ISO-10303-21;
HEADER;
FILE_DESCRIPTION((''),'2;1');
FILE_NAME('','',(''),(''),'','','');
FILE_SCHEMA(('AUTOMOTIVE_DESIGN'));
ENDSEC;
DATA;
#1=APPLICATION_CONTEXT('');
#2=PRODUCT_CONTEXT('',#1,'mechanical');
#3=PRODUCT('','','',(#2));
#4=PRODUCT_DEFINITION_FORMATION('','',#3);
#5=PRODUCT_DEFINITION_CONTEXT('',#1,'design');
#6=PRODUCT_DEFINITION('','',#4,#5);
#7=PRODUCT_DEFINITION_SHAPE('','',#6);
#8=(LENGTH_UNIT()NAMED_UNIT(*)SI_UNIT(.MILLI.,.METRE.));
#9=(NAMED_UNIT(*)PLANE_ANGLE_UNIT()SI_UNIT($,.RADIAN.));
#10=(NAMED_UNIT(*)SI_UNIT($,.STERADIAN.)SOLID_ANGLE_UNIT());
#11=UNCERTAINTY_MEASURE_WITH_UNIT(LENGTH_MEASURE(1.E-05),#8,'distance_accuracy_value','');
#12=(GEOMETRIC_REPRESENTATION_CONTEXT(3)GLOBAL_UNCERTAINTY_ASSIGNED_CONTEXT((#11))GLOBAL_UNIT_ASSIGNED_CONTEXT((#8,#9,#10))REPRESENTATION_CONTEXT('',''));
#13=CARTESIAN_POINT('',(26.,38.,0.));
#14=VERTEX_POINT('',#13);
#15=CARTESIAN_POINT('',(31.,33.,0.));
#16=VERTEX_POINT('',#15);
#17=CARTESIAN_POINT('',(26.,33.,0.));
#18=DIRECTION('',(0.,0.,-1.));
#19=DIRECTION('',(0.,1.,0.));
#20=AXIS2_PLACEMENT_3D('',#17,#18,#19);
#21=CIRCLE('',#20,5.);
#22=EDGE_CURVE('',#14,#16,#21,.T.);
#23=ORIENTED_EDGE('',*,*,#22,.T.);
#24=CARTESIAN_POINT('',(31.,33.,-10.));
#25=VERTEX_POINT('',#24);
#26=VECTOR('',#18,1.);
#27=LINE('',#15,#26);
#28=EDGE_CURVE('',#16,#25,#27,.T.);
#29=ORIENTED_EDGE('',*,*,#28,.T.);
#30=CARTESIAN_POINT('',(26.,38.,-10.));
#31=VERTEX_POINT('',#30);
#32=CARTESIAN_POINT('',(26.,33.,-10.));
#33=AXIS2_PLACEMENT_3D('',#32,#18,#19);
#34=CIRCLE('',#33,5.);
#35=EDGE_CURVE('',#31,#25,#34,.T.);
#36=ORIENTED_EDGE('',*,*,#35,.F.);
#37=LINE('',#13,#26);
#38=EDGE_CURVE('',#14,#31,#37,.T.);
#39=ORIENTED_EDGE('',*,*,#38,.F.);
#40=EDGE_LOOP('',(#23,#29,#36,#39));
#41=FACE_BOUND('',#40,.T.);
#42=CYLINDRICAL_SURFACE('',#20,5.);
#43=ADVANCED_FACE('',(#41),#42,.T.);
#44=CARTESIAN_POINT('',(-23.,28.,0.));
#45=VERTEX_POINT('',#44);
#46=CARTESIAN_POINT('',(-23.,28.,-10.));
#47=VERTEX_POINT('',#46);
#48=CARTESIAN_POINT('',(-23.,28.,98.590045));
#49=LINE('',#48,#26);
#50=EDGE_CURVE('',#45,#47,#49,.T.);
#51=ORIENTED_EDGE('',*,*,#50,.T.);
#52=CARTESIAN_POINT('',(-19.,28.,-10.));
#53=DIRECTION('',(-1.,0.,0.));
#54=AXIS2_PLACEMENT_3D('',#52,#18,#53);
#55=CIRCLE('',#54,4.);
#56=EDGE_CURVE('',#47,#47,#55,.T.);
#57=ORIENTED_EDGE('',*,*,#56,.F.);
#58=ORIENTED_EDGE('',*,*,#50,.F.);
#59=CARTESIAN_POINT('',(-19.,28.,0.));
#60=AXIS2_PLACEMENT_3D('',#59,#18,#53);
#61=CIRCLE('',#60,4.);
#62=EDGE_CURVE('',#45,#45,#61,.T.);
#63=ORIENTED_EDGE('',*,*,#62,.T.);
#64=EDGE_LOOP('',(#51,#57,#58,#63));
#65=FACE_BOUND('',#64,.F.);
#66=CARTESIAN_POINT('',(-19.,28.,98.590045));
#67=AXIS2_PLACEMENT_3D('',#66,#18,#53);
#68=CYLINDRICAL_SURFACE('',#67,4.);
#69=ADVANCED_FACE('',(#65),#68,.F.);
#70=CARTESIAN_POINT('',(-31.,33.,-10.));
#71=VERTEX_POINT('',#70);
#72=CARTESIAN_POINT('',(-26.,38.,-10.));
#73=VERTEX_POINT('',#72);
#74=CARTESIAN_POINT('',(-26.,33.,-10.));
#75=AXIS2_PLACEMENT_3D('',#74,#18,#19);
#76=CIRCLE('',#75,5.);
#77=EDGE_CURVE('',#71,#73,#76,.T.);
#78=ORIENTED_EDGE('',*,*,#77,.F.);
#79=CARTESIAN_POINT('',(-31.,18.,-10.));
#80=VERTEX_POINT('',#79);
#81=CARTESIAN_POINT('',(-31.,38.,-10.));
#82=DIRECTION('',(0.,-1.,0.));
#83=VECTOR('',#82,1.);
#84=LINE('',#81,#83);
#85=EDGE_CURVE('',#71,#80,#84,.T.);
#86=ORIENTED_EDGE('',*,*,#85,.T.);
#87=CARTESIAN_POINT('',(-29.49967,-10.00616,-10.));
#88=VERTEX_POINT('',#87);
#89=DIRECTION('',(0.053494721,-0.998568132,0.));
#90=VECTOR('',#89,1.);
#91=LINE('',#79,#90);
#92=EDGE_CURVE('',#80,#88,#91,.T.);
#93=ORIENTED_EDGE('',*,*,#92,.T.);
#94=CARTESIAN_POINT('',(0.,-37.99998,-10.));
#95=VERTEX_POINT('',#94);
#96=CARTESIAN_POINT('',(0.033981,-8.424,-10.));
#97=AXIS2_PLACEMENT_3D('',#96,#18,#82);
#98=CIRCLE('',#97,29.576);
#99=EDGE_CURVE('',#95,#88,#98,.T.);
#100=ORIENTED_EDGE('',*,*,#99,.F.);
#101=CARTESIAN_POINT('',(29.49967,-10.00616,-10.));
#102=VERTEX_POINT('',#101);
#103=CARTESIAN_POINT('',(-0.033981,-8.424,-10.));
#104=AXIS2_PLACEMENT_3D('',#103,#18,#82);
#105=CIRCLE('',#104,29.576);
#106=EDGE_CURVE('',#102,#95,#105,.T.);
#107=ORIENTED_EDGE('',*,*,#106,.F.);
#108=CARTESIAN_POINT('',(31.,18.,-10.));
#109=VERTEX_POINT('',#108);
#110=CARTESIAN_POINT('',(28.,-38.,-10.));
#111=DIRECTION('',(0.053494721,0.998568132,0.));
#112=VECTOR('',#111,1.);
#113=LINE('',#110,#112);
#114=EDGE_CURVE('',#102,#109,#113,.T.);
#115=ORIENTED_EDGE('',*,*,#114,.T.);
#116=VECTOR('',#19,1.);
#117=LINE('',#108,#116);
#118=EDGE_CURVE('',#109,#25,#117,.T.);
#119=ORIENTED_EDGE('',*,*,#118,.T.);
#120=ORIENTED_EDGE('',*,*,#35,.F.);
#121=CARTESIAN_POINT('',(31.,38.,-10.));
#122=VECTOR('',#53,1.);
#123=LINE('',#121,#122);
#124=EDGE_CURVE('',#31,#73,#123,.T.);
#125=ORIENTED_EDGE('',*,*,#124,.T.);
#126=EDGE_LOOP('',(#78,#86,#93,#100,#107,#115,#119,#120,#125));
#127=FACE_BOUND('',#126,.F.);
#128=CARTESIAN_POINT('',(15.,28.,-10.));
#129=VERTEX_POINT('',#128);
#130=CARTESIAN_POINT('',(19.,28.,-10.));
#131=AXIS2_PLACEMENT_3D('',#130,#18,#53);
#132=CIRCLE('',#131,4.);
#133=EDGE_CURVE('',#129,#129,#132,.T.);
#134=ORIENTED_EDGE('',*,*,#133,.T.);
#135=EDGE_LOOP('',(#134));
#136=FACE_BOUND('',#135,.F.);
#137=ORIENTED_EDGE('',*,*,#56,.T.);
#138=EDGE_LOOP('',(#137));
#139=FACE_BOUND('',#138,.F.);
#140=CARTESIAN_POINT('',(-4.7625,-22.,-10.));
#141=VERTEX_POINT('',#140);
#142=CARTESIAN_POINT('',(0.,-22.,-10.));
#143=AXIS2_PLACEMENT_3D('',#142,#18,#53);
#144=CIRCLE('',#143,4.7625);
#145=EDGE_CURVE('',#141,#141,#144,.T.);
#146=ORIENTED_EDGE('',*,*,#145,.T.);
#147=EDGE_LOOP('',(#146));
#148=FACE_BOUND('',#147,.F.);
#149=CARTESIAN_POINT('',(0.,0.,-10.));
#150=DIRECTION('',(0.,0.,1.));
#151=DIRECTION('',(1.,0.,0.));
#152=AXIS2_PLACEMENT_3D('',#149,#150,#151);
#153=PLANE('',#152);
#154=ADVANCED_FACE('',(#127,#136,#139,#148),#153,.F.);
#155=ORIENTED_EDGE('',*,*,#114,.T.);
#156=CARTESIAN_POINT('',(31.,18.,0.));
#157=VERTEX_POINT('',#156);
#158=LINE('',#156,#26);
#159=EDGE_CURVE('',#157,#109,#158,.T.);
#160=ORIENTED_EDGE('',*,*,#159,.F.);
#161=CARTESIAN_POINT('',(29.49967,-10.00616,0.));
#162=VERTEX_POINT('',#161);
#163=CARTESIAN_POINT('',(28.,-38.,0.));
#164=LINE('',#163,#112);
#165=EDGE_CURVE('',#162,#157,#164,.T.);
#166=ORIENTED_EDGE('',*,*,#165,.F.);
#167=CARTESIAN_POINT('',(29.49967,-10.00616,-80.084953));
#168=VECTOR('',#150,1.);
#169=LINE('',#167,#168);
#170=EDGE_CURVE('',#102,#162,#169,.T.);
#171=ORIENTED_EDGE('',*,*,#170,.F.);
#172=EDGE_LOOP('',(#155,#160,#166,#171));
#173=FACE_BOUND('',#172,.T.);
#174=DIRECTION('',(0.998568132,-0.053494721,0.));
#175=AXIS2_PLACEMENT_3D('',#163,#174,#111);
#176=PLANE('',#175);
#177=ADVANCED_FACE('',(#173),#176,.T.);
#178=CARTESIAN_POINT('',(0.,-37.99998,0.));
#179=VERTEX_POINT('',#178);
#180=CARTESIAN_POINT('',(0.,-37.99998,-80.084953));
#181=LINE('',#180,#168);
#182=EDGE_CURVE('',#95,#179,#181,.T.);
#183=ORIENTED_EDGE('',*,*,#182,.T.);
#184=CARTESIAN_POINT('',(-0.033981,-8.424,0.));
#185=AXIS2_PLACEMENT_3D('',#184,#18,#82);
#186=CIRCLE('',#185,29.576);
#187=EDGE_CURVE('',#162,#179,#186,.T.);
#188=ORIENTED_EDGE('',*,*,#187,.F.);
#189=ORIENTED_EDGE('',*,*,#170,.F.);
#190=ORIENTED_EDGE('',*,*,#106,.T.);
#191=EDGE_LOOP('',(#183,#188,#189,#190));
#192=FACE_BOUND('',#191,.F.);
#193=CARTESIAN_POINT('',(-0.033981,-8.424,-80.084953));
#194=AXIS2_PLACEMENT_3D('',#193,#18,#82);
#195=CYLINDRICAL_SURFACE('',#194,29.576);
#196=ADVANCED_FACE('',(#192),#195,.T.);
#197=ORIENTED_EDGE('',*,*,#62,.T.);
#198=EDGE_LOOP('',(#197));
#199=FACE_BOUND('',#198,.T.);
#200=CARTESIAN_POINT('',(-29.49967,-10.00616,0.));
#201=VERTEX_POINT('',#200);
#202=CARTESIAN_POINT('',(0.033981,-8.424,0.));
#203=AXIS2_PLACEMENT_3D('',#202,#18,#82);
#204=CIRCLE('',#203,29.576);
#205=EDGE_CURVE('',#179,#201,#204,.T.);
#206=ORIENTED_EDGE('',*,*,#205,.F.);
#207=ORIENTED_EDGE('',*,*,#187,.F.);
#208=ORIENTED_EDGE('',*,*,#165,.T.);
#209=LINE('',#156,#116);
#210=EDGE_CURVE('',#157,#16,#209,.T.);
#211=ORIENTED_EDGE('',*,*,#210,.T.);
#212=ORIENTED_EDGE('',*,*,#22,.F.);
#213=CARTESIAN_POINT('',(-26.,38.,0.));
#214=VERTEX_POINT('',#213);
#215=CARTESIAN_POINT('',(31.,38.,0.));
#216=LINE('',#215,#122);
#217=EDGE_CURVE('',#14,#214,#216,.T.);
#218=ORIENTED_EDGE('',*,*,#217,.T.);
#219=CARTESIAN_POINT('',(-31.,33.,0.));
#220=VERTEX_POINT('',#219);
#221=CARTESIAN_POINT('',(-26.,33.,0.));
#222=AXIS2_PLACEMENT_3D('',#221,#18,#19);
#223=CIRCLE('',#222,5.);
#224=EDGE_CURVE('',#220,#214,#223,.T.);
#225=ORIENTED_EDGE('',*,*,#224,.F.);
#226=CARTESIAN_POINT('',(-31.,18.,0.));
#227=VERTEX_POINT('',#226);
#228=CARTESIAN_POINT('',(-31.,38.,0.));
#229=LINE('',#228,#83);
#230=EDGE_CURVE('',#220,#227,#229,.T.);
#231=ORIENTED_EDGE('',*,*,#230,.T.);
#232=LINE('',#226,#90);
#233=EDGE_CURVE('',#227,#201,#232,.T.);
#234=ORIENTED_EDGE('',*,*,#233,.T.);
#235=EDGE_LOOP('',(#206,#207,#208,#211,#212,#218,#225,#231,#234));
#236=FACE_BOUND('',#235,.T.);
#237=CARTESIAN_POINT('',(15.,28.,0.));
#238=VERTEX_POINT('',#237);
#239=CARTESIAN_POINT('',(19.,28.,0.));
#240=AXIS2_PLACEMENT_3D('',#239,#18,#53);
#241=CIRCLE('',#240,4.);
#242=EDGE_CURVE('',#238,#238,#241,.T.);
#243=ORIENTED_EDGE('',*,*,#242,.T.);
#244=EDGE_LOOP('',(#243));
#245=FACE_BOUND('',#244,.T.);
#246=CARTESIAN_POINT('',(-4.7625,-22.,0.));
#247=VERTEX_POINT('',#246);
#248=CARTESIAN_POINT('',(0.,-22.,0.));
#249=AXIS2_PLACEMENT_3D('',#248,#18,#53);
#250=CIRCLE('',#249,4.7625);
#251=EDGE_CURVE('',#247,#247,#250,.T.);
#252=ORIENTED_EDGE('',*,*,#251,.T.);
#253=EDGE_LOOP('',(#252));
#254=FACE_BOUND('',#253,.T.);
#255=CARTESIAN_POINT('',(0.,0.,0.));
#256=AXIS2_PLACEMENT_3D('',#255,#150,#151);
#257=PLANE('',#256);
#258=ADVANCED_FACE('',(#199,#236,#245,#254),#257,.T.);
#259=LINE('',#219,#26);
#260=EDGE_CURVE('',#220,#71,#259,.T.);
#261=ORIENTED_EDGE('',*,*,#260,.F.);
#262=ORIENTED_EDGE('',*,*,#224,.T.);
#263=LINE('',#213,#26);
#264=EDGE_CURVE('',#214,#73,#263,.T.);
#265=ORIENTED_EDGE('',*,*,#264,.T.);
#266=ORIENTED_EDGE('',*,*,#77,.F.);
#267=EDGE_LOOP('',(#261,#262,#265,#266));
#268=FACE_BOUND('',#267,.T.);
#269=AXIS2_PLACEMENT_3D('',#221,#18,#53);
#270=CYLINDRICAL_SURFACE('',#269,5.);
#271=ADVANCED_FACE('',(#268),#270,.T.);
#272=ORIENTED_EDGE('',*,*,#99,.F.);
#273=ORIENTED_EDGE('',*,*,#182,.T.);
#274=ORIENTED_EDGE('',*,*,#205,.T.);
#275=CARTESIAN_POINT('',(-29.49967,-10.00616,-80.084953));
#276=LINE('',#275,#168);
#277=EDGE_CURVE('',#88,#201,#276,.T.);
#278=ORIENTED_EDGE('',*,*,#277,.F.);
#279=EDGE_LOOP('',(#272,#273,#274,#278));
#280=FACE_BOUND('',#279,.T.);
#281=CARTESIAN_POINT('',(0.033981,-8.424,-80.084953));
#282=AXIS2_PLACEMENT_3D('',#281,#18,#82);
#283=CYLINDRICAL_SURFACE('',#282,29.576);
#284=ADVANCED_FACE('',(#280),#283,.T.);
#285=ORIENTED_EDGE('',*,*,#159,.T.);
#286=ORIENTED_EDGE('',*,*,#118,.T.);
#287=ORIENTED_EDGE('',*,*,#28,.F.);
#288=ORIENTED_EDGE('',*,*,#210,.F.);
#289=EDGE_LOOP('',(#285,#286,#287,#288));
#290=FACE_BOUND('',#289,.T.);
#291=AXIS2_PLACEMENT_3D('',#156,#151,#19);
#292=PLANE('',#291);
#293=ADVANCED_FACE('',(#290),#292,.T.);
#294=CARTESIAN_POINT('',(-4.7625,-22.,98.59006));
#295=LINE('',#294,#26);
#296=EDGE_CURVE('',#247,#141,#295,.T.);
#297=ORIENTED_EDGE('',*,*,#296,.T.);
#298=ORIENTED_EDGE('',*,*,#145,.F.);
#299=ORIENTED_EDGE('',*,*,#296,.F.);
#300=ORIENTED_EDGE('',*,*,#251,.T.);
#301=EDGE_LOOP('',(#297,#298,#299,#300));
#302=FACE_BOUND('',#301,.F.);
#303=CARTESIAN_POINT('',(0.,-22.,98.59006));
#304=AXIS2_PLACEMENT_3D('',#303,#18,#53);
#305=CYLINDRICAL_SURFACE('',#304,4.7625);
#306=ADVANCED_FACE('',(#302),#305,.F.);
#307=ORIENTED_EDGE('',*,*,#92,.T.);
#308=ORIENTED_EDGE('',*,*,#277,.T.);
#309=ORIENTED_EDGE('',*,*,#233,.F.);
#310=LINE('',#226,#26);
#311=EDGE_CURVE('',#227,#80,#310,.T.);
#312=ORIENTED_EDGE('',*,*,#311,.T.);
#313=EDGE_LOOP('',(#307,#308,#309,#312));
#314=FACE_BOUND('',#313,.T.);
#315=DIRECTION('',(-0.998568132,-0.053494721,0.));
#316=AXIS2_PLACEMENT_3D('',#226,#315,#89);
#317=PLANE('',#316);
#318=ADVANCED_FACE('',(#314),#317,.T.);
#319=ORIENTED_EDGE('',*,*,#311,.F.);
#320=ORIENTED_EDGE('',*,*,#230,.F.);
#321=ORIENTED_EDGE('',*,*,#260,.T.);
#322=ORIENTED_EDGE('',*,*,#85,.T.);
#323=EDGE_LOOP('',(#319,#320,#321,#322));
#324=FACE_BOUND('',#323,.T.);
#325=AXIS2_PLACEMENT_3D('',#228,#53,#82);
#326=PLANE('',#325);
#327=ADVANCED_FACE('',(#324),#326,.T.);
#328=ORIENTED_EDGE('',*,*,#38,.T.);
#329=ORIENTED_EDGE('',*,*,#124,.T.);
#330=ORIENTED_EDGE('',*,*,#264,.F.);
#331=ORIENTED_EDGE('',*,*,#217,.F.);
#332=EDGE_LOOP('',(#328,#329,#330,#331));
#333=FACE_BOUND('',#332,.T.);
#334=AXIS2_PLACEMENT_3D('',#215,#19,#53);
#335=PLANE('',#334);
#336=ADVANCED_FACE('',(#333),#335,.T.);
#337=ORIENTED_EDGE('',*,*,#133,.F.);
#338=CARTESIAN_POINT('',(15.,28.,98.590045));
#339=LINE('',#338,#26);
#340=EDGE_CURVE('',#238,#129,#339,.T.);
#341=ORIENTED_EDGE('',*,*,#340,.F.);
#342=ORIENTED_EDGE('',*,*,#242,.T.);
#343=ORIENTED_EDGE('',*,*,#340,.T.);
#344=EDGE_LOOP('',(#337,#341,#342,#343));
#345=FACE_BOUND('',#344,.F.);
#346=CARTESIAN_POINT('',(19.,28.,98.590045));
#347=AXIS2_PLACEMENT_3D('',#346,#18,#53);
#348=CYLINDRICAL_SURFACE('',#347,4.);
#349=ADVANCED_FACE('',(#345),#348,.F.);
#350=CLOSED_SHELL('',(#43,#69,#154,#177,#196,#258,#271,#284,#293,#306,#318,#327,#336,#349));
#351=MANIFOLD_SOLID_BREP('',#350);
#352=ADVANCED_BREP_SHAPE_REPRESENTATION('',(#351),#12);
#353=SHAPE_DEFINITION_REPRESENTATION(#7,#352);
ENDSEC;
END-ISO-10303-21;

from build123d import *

# Parameters (mm, degrees)
F0_W        = 56
F0_H        = 76
F1_DEPTH    = 10
F2_D        = 9.525
F3_T1_DEPTH = 150.1699053678
F4_R        = 5
F5_D        = 8


# Not quite as in the source:
# - a fillet or chamfer that OpenCascade refuses, or shapes differently, is made with other operations: its cross-section is extruded or revolved along the edge and cut away or added
# - a length typed as a fraction of an inch, garbled in the dataset ("3 / 203.2 mm" for 3/8 in), is restored


with BuildPart() as f1:
    # F0 (on Top) → F1 (new body)
    with BuildSketch(Plane.XY):
        Rectangle(F0_W, F0_H)
        Polygon((-31, 18), (-28, -38), (-28, 38), (-31, 38), align=None)
        Polygon((28, 38), (28, -38), (31, 18), (31, 38), align=None)
    extrude(amount=-F1_DEPTH)

    # F2 (through all)
    with Locations(Plane.XY):
        with Locations((0, -22)):
            Hole(F2_D / 2)

    # F3: fillet of radius 29.576 on 2 edges, made by hand

    # F3_s2 → F3_t1 (cut)
    with BuildSketch(Plane.XY.offset(-80.0849526839)):
        with BuildLine():
            ThreePointArc((-0.0339810736, -38), (20.3123431081, -29.889480854), (29.4996700065, -10.0061598793))
            Line((29.4996700065, -10.0061598793), (28, -38))
            Line((28, -38), (-0.0339810736, -38))
        make_face()
        with BuildLine():
            ThreePointArc((0.0339810736, -38), (-20.3123431081, -29.889480854), (-29.4996700065, -10.0061598793))
            Line((-29.4996700065, -10.0061598793), (-28, -38))
            Line((-28, -38), (0.0339810736, -38))
        make_face()
    extrude(amount=F3_T1_DEPTH, mode=Mode.SUBTRACT)

    # F4
    f4_edges = [f1.edges().sort_by_distance(p)[0] for p in [
        (-31, 38, -5),
        (31, 38, -5),
    ]]
    fillet(f4_edges, radius=F4_R)

    # F5 (through all)
    with Locations(Plane.XY):
        with Locations((-19, 28), (19, 28)):
            Hole(F5_D / 2)


solid = f1.part
